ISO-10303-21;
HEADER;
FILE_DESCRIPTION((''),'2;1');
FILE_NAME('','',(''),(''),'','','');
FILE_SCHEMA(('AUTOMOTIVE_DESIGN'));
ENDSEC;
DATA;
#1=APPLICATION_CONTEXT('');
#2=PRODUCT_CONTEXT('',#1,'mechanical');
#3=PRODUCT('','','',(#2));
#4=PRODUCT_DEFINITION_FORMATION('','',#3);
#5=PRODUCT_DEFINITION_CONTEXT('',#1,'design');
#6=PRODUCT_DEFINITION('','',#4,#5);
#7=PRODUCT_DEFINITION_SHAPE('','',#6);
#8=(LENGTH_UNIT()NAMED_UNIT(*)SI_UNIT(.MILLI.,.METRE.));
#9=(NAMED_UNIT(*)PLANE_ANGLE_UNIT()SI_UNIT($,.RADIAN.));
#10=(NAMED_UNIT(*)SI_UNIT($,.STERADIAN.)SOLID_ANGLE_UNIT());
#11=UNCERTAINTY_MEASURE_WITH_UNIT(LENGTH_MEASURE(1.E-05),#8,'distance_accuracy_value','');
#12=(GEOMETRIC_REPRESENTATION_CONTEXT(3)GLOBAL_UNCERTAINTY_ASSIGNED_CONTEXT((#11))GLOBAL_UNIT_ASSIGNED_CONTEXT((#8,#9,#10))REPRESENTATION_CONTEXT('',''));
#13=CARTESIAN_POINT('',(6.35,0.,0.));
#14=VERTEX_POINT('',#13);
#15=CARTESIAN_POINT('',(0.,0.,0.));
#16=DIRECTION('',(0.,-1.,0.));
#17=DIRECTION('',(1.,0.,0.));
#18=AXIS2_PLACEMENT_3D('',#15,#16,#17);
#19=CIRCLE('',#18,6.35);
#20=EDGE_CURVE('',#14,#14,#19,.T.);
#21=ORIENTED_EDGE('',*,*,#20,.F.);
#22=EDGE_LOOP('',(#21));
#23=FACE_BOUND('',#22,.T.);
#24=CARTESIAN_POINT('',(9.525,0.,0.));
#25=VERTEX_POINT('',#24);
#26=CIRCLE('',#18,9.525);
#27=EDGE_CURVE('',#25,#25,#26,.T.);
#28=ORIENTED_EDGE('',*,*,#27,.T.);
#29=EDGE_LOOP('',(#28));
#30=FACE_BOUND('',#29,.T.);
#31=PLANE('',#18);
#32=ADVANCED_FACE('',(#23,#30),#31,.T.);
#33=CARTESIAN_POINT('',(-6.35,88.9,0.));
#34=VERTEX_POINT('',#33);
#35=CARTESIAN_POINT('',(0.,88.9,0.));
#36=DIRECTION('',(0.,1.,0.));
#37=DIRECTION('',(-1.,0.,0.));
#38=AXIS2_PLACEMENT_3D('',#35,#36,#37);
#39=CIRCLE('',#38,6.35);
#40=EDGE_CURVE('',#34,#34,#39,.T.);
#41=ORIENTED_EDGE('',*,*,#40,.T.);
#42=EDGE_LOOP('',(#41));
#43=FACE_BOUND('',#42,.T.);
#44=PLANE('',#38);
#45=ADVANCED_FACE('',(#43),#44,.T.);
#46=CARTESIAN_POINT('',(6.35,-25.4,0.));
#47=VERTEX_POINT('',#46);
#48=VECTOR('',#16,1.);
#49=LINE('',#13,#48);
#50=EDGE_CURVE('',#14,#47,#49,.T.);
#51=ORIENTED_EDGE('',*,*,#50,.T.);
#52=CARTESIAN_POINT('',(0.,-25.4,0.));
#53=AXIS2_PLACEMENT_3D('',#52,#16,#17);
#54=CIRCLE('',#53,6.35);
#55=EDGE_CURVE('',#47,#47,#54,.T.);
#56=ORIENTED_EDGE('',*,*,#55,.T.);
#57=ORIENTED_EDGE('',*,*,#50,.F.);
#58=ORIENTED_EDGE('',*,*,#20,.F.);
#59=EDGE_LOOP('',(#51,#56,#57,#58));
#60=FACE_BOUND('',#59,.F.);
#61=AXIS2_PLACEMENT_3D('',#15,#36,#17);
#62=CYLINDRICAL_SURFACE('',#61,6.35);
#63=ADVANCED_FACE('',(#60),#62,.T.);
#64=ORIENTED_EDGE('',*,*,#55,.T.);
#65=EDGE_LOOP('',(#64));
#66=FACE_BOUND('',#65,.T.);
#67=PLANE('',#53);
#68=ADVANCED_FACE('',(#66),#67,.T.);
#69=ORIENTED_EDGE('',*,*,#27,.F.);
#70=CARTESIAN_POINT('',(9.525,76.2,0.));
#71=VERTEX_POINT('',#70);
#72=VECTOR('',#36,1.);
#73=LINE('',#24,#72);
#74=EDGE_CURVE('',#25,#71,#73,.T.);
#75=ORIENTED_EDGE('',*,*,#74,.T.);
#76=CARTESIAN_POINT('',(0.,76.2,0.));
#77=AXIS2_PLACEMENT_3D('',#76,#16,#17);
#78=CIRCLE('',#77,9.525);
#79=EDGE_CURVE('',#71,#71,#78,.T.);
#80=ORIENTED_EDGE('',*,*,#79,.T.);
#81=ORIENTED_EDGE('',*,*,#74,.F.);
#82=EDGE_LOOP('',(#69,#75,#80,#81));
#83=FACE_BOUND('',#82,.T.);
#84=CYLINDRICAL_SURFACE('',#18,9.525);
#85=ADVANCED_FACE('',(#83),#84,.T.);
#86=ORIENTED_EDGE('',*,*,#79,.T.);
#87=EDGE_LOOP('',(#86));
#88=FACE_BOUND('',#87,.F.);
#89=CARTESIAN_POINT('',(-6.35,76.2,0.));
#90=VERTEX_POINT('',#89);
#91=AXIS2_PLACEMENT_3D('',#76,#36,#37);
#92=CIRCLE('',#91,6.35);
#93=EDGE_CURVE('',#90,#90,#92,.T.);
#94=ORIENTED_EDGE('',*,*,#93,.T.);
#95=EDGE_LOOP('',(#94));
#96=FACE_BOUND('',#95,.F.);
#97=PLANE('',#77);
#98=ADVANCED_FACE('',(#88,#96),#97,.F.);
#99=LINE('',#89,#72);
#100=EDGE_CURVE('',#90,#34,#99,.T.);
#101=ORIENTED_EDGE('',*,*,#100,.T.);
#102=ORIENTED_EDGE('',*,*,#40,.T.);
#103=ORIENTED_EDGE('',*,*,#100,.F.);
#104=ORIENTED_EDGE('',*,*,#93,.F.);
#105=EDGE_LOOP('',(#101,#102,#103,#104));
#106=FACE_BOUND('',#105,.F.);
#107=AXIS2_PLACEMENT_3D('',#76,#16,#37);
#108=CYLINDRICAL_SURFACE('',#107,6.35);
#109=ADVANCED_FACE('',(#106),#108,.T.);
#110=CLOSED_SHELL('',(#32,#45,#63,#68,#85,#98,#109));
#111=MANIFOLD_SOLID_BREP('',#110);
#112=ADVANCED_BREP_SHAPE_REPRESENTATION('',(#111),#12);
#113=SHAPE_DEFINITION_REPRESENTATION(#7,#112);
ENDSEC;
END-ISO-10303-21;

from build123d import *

# Parameters (mm, degrees)
F0_R     = 6.35
F1_DEPTH = 25.4
F2_R     = 9.525
F3_DEPTH = 76.2
F4_R     = 6.35
F5_DEPTH = 12.7


# Not quite as in the source:
# - a feature names something its author has since deleted; it is built from what else it names


with BuildPart() as f1:
    # F0 (on Front) → F1 (new body)
    with BuildSketch(Plane.XZ):
        Circle(F0_R)
    extrude(amount=F1_DEPTH)

    # F2 (on Front) → F3 (join)
    with BuildSketch(Plane.XZ):
        Circle(F2_R)
    extrude(amount=-F3_DEPTH)

    # F4 (on face) → F5 (join)
    with BuildSketch(Plane(origin=(0, 76.2, 0), x_dir=(-1, 0, 0), z_dir=(0, 1, 0))):
        Circle(F4_R)
    extrude(amount=F5_DEPTH)


solid = f1.part
